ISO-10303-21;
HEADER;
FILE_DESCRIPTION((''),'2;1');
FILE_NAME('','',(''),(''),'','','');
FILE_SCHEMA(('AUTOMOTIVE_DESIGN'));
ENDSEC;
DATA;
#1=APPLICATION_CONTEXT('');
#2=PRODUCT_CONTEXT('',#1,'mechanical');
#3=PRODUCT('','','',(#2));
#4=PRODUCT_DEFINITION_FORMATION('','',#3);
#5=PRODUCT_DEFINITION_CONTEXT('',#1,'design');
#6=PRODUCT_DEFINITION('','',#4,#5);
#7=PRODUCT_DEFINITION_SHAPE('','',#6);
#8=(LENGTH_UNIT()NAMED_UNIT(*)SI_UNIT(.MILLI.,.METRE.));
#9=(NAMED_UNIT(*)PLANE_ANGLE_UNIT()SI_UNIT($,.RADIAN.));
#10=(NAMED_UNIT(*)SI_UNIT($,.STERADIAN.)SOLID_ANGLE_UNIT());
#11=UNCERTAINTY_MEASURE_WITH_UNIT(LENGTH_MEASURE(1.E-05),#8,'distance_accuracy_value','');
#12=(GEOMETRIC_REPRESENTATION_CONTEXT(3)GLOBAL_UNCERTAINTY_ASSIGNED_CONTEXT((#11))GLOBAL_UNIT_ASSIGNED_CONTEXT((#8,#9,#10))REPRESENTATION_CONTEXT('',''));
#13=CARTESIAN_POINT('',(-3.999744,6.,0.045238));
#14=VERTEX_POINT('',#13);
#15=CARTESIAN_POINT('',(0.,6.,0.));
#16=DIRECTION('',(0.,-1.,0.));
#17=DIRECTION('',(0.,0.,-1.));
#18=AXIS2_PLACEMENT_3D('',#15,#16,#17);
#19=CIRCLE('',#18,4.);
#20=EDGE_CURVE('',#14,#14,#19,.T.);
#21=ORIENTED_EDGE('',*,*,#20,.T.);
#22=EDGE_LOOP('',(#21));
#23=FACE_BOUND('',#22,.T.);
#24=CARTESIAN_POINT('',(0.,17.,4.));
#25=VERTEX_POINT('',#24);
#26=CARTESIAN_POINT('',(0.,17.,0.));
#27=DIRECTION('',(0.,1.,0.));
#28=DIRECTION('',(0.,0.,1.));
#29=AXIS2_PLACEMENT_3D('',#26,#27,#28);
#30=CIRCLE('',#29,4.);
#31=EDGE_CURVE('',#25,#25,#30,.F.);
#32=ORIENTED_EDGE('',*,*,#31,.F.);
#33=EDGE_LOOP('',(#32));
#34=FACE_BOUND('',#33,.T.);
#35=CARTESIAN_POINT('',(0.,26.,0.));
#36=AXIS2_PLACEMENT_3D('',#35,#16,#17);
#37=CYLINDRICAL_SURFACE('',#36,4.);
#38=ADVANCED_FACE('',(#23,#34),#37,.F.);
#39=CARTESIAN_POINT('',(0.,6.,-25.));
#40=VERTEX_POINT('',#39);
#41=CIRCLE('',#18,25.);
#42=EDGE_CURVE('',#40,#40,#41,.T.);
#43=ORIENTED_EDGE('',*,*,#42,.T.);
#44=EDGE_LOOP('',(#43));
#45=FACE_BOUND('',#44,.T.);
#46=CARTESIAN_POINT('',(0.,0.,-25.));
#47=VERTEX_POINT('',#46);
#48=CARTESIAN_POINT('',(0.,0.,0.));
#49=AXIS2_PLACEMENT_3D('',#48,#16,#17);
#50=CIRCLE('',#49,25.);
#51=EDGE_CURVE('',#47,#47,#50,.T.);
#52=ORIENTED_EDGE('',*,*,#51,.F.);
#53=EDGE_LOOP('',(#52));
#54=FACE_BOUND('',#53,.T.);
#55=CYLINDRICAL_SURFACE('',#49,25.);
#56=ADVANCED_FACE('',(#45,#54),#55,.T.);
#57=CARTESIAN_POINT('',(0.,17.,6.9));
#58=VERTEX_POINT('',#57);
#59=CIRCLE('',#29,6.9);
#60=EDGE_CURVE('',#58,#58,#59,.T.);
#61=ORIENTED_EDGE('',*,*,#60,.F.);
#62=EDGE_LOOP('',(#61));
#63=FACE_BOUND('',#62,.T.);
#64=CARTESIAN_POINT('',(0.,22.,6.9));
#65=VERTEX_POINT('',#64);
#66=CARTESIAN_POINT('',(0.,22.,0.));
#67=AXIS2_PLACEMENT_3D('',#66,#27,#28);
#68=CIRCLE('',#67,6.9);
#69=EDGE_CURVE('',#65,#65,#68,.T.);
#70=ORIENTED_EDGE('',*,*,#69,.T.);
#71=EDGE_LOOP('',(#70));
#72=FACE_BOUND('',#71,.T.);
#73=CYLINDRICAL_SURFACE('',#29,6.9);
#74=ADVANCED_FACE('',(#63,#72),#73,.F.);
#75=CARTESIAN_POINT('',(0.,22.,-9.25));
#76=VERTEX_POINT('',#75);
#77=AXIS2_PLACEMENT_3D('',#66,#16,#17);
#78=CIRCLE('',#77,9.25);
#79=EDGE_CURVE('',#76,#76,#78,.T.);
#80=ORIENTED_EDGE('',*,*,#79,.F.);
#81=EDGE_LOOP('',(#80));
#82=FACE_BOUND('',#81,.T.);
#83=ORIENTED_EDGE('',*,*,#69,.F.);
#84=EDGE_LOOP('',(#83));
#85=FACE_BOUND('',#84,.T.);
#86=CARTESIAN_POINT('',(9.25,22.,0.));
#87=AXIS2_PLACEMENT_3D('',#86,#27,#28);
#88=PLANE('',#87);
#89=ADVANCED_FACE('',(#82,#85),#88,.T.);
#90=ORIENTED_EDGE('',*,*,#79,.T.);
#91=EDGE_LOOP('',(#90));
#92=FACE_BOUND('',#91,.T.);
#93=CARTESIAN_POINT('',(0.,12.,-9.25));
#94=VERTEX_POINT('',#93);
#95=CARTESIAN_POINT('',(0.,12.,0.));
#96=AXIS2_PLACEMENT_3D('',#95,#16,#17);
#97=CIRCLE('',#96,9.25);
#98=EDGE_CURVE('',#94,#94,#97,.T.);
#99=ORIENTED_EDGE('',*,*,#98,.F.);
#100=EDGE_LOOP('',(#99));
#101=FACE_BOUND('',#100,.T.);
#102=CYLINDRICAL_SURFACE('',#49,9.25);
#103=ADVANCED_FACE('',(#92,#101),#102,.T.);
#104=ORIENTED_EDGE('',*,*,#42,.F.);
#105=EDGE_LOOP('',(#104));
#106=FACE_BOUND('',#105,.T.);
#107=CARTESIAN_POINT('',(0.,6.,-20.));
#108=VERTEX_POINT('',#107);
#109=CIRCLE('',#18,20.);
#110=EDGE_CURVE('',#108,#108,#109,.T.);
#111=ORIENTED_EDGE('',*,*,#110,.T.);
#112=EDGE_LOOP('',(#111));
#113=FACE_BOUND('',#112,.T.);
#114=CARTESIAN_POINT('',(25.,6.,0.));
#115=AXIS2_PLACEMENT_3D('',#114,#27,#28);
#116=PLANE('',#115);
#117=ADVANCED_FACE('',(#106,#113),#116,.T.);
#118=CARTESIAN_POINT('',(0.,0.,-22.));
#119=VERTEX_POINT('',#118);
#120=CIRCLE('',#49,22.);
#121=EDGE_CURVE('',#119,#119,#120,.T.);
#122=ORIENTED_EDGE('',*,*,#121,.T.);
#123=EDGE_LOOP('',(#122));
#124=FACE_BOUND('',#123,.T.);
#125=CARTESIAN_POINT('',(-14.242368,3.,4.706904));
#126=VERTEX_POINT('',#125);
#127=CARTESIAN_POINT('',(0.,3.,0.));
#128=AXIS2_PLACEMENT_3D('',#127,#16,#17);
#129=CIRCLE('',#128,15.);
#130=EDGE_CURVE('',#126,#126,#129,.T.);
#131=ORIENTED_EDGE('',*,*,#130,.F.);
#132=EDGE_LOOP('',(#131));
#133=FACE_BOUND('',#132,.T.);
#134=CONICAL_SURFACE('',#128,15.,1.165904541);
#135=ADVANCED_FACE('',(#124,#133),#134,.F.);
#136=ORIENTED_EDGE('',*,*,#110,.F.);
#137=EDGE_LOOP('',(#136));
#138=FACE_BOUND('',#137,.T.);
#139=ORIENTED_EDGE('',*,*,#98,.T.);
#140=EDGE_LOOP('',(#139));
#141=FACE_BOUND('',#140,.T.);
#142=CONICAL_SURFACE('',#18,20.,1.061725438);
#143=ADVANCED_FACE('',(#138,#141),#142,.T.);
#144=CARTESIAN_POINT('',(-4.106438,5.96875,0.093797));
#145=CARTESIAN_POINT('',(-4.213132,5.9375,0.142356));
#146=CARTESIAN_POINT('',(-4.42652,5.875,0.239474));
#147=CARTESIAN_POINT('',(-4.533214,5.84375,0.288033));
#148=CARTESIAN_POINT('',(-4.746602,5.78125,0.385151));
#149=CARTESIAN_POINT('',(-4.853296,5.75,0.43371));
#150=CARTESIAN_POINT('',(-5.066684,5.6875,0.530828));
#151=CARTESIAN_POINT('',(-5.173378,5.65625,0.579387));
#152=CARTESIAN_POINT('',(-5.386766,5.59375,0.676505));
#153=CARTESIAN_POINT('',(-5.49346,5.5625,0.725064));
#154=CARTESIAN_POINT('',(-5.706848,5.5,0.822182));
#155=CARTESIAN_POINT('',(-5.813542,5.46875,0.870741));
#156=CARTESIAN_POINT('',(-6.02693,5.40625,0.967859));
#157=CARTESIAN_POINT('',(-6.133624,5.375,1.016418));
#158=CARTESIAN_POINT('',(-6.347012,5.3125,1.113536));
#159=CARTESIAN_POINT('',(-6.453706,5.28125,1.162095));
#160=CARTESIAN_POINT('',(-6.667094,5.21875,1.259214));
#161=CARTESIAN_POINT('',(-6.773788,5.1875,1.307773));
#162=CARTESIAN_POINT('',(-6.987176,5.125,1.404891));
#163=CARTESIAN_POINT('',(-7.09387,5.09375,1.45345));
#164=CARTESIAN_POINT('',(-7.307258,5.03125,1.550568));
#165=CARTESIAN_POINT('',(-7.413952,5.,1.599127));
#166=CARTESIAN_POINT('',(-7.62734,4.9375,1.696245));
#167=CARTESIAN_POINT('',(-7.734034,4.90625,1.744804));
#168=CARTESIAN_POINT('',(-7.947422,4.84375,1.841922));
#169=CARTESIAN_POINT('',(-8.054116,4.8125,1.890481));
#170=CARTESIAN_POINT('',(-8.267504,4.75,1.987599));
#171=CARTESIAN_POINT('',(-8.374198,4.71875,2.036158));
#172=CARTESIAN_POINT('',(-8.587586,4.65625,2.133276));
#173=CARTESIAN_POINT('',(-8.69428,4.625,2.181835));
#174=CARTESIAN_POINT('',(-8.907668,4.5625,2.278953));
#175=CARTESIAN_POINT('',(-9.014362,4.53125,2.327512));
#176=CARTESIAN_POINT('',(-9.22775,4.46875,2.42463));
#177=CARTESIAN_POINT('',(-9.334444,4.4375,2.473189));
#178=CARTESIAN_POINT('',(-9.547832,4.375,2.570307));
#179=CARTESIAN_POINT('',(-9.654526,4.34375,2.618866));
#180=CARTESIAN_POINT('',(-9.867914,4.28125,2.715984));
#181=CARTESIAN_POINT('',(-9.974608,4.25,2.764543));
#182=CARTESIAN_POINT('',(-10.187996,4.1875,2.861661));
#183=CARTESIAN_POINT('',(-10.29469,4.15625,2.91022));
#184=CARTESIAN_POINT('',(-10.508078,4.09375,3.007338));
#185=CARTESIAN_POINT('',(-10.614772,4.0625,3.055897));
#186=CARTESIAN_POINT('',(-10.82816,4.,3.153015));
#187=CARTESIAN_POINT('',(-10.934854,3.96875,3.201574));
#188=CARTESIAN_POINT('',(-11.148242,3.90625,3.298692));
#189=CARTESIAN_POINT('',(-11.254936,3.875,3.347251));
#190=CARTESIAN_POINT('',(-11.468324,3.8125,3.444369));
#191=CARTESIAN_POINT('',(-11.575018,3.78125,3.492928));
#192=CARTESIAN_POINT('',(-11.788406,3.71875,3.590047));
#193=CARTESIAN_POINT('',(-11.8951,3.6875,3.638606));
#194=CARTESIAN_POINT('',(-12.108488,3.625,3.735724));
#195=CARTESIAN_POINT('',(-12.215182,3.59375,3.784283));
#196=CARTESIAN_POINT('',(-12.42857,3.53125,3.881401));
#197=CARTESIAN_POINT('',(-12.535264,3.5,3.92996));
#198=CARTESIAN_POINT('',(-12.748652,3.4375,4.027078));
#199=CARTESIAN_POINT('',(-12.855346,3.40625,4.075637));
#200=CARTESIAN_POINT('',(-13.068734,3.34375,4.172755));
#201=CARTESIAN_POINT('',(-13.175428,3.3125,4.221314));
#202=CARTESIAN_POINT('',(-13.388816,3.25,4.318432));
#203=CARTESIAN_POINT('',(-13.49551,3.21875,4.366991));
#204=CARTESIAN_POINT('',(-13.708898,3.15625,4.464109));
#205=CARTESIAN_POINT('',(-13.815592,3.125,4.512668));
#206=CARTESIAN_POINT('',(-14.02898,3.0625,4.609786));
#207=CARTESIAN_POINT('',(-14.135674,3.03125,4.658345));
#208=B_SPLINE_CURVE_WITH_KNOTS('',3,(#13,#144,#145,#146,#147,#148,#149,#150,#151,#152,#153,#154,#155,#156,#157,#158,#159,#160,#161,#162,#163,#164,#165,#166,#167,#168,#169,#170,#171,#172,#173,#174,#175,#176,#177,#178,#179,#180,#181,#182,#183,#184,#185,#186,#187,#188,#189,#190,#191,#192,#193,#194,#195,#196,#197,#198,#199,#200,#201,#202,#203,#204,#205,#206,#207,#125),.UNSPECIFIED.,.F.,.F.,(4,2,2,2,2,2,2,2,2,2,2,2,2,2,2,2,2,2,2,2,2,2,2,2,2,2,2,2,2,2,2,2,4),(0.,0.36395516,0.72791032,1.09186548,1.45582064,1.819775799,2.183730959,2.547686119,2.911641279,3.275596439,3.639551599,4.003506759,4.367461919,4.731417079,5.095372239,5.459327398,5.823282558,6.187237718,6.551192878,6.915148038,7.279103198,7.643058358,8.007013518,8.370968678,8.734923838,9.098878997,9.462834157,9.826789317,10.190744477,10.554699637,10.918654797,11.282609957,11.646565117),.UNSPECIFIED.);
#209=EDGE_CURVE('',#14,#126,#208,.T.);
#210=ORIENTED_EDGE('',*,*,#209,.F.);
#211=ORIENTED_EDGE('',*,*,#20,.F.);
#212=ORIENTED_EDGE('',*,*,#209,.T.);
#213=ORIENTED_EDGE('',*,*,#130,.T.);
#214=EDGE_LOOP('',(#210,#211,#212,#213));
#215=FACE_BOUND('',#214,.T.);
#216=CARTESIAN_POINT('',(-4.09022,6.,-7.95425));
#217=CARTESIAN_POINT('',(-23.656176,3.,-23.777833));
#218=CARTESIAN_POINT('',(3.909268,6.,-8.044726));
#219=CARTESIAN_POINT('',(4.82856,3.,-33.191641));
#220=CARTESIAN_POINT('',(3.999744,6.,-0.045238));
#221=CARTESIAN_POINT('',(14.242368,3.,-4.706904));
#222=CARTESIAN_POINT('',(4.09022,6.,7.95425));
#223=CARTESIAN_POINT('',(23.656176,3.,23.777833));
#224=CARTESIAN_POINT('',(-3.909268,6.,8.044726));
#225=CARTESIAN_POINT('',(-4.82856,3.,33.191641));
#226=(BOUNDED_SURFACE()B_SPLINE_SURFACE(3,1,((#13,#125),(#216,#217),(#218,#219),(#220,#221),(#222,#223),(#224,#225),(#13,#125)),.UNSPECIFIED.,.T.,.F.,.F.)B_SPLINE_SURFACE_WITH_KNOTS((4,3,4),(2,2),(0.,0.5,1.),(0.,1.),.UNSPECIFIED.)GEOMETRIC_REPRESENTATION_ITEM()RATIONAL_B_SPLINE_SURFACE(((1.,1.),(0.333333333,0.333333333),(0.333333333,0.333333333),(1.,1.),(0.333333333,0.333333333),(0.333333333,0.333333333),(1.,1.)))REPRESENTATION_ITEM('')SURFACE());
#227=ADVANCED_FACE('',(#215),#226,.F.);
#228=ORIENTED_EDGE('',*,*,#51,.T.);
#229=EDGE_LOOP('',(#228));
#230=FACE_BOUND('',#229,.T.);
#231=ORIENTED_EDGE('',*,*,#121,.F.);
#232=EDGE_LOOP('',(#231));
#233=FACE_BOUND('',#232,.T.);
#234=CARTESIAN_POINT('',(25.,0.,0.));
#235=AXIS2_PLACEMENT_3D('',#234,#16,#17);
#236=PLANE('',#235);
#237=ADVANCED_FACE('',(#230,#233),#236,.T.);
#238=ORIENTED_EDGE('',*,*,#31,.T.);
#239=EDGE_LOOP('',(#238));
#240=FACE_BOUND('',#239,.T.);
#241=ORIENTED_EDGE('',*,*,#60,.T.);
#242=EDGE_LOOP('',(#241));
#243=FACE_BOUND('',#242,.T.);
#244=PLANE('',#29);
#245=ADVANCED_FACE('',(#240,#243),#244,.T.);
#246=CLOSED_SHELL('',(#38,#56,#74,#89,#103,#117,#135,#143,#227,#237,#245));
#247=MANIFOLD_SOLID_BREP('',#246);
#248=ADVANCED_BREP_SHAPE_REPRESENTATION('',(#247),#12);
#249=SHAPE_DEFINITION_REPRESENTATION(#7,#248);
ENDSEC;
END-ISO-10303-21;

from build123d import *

# Parameters (mm, degrees)
SKETCH5_R          = 22
SKETCH7_R          = 15
SKETCH10_R         = 4
CUT_EXTRUDE1_DEPTH = 20
SKETCH11_R         = 6.9
CUT_EXTRUDE2_DEPTH = 5


with BuildPart() as part:
    # Sketch4 → Revolve1 (revolve)
    with BuildSketch(Plane.XY, mode=Mode.PRIVATE) as revolve1_sk:
        Polygon((25, 0), (25, 6), (20, 6), (9.25, 12), (9.25, 22), (0, 22), (0, 0), align=None)
    revolve(revolve1_sk.sketch.rotate(Axis((0, 0, 0), (0, 1, 0)), 90), axis=Axis((0, 0, 0), (0, 1, 0)))

    # Sketch5 → Cut-Loft1 section 0
    with BuildSketch(Plane.XZ):
        Circle(SKETCH5_R)
    # Sketch7 → Cut-Loft1 section 1
    with BuildSketch(Plane(origin=(0, 3, 0), x_dir=(-1, 0, 0), z_dir=(0, -1, 0))):
        Circle(SKETCH7_R)
    loft(mode=Mode.SUBTRACT)

    # Cut-Loft2: read off the stored shape, not the designer's step
    # Cut-Loft2: loft between two sections, ruled curve by curve
    cut_loft2_from = [
        Edge.make_bspline([(-3.999744183, 6, 0.04523797), (-4.090220122, 6, -7.954250395), (3.909268243, 6, -8.044726335), (3.999744183, 6, -0.04523797), (4.090220122, 6, 7.954250395), (-3.909268243, 6, 8.044726335), (-3.999744183, 6, 0.04523797)], [0, 0, 0, 0, 0.5, 0.5, 0.5, 1, 1, 1, 1], 3, [1, 0.333333333, 0.333333333, 1, 0.333333333, 0.333333333, 1]),
    ]
    cut_loft2_to = [
        Edge.make_bspline([(-14.242368289, 3, 4.706904028), (-23.656176345, 3, -23.777832549), (4.828560232, 3, -33.191640605), (14.242368289, 3, -4.706904028), (23.656176345, 3, 23.777832549), (-4.828560232, 3, 33.191640605), (-14.242368289, 3, 4.706904028)], [0, 0, 0, 0, 0.5, 0.5, 0.5, 1, 1, 1, 1], 3, [1, 0.333333333, 0.333333333, 1, 0.333333333, 0.333333333, 1]),
    ]
    cut_loft2 = Solid(Shell([*[Face.make_surface_from_curves(cut_loft2_from[k], cut_loft2_to[k]) for k in range(1)], Face(Wire(cut_loft2_from)), Face(Wire(cut_loft2_to))]))
    add(cut_loft2, mode=Mode.SUBTRACT)

    # Sketch10 → Cut-Extrude1 (cut)
    with BuildSketch(Plane.XZ.offset(-6)):
        with Locations(Location((0, 0, 0), (0, 0, 179.352))):
            Circle(SKETCH10_R)
    extrude(amount=-CUT_EXTRUDE1_DEPTH, mode=Mode.SUBTRACT)

    # Sketch11 → Cut-Extrude2 (cut)
    with BuildSketch(Plane(origin=(0, 22, 0), x_dir=(1, 0, 0), z_dir=(0, 1, 0))):
        with Locations(Location((0, 0, 0), (0, 0, 270))):
            Circle(SKETCH11_R)
    extrude(amount=-CUT_EXTRUDE2_DEPTH, mode=Mode.SUBTRACT)


solid = part.part
